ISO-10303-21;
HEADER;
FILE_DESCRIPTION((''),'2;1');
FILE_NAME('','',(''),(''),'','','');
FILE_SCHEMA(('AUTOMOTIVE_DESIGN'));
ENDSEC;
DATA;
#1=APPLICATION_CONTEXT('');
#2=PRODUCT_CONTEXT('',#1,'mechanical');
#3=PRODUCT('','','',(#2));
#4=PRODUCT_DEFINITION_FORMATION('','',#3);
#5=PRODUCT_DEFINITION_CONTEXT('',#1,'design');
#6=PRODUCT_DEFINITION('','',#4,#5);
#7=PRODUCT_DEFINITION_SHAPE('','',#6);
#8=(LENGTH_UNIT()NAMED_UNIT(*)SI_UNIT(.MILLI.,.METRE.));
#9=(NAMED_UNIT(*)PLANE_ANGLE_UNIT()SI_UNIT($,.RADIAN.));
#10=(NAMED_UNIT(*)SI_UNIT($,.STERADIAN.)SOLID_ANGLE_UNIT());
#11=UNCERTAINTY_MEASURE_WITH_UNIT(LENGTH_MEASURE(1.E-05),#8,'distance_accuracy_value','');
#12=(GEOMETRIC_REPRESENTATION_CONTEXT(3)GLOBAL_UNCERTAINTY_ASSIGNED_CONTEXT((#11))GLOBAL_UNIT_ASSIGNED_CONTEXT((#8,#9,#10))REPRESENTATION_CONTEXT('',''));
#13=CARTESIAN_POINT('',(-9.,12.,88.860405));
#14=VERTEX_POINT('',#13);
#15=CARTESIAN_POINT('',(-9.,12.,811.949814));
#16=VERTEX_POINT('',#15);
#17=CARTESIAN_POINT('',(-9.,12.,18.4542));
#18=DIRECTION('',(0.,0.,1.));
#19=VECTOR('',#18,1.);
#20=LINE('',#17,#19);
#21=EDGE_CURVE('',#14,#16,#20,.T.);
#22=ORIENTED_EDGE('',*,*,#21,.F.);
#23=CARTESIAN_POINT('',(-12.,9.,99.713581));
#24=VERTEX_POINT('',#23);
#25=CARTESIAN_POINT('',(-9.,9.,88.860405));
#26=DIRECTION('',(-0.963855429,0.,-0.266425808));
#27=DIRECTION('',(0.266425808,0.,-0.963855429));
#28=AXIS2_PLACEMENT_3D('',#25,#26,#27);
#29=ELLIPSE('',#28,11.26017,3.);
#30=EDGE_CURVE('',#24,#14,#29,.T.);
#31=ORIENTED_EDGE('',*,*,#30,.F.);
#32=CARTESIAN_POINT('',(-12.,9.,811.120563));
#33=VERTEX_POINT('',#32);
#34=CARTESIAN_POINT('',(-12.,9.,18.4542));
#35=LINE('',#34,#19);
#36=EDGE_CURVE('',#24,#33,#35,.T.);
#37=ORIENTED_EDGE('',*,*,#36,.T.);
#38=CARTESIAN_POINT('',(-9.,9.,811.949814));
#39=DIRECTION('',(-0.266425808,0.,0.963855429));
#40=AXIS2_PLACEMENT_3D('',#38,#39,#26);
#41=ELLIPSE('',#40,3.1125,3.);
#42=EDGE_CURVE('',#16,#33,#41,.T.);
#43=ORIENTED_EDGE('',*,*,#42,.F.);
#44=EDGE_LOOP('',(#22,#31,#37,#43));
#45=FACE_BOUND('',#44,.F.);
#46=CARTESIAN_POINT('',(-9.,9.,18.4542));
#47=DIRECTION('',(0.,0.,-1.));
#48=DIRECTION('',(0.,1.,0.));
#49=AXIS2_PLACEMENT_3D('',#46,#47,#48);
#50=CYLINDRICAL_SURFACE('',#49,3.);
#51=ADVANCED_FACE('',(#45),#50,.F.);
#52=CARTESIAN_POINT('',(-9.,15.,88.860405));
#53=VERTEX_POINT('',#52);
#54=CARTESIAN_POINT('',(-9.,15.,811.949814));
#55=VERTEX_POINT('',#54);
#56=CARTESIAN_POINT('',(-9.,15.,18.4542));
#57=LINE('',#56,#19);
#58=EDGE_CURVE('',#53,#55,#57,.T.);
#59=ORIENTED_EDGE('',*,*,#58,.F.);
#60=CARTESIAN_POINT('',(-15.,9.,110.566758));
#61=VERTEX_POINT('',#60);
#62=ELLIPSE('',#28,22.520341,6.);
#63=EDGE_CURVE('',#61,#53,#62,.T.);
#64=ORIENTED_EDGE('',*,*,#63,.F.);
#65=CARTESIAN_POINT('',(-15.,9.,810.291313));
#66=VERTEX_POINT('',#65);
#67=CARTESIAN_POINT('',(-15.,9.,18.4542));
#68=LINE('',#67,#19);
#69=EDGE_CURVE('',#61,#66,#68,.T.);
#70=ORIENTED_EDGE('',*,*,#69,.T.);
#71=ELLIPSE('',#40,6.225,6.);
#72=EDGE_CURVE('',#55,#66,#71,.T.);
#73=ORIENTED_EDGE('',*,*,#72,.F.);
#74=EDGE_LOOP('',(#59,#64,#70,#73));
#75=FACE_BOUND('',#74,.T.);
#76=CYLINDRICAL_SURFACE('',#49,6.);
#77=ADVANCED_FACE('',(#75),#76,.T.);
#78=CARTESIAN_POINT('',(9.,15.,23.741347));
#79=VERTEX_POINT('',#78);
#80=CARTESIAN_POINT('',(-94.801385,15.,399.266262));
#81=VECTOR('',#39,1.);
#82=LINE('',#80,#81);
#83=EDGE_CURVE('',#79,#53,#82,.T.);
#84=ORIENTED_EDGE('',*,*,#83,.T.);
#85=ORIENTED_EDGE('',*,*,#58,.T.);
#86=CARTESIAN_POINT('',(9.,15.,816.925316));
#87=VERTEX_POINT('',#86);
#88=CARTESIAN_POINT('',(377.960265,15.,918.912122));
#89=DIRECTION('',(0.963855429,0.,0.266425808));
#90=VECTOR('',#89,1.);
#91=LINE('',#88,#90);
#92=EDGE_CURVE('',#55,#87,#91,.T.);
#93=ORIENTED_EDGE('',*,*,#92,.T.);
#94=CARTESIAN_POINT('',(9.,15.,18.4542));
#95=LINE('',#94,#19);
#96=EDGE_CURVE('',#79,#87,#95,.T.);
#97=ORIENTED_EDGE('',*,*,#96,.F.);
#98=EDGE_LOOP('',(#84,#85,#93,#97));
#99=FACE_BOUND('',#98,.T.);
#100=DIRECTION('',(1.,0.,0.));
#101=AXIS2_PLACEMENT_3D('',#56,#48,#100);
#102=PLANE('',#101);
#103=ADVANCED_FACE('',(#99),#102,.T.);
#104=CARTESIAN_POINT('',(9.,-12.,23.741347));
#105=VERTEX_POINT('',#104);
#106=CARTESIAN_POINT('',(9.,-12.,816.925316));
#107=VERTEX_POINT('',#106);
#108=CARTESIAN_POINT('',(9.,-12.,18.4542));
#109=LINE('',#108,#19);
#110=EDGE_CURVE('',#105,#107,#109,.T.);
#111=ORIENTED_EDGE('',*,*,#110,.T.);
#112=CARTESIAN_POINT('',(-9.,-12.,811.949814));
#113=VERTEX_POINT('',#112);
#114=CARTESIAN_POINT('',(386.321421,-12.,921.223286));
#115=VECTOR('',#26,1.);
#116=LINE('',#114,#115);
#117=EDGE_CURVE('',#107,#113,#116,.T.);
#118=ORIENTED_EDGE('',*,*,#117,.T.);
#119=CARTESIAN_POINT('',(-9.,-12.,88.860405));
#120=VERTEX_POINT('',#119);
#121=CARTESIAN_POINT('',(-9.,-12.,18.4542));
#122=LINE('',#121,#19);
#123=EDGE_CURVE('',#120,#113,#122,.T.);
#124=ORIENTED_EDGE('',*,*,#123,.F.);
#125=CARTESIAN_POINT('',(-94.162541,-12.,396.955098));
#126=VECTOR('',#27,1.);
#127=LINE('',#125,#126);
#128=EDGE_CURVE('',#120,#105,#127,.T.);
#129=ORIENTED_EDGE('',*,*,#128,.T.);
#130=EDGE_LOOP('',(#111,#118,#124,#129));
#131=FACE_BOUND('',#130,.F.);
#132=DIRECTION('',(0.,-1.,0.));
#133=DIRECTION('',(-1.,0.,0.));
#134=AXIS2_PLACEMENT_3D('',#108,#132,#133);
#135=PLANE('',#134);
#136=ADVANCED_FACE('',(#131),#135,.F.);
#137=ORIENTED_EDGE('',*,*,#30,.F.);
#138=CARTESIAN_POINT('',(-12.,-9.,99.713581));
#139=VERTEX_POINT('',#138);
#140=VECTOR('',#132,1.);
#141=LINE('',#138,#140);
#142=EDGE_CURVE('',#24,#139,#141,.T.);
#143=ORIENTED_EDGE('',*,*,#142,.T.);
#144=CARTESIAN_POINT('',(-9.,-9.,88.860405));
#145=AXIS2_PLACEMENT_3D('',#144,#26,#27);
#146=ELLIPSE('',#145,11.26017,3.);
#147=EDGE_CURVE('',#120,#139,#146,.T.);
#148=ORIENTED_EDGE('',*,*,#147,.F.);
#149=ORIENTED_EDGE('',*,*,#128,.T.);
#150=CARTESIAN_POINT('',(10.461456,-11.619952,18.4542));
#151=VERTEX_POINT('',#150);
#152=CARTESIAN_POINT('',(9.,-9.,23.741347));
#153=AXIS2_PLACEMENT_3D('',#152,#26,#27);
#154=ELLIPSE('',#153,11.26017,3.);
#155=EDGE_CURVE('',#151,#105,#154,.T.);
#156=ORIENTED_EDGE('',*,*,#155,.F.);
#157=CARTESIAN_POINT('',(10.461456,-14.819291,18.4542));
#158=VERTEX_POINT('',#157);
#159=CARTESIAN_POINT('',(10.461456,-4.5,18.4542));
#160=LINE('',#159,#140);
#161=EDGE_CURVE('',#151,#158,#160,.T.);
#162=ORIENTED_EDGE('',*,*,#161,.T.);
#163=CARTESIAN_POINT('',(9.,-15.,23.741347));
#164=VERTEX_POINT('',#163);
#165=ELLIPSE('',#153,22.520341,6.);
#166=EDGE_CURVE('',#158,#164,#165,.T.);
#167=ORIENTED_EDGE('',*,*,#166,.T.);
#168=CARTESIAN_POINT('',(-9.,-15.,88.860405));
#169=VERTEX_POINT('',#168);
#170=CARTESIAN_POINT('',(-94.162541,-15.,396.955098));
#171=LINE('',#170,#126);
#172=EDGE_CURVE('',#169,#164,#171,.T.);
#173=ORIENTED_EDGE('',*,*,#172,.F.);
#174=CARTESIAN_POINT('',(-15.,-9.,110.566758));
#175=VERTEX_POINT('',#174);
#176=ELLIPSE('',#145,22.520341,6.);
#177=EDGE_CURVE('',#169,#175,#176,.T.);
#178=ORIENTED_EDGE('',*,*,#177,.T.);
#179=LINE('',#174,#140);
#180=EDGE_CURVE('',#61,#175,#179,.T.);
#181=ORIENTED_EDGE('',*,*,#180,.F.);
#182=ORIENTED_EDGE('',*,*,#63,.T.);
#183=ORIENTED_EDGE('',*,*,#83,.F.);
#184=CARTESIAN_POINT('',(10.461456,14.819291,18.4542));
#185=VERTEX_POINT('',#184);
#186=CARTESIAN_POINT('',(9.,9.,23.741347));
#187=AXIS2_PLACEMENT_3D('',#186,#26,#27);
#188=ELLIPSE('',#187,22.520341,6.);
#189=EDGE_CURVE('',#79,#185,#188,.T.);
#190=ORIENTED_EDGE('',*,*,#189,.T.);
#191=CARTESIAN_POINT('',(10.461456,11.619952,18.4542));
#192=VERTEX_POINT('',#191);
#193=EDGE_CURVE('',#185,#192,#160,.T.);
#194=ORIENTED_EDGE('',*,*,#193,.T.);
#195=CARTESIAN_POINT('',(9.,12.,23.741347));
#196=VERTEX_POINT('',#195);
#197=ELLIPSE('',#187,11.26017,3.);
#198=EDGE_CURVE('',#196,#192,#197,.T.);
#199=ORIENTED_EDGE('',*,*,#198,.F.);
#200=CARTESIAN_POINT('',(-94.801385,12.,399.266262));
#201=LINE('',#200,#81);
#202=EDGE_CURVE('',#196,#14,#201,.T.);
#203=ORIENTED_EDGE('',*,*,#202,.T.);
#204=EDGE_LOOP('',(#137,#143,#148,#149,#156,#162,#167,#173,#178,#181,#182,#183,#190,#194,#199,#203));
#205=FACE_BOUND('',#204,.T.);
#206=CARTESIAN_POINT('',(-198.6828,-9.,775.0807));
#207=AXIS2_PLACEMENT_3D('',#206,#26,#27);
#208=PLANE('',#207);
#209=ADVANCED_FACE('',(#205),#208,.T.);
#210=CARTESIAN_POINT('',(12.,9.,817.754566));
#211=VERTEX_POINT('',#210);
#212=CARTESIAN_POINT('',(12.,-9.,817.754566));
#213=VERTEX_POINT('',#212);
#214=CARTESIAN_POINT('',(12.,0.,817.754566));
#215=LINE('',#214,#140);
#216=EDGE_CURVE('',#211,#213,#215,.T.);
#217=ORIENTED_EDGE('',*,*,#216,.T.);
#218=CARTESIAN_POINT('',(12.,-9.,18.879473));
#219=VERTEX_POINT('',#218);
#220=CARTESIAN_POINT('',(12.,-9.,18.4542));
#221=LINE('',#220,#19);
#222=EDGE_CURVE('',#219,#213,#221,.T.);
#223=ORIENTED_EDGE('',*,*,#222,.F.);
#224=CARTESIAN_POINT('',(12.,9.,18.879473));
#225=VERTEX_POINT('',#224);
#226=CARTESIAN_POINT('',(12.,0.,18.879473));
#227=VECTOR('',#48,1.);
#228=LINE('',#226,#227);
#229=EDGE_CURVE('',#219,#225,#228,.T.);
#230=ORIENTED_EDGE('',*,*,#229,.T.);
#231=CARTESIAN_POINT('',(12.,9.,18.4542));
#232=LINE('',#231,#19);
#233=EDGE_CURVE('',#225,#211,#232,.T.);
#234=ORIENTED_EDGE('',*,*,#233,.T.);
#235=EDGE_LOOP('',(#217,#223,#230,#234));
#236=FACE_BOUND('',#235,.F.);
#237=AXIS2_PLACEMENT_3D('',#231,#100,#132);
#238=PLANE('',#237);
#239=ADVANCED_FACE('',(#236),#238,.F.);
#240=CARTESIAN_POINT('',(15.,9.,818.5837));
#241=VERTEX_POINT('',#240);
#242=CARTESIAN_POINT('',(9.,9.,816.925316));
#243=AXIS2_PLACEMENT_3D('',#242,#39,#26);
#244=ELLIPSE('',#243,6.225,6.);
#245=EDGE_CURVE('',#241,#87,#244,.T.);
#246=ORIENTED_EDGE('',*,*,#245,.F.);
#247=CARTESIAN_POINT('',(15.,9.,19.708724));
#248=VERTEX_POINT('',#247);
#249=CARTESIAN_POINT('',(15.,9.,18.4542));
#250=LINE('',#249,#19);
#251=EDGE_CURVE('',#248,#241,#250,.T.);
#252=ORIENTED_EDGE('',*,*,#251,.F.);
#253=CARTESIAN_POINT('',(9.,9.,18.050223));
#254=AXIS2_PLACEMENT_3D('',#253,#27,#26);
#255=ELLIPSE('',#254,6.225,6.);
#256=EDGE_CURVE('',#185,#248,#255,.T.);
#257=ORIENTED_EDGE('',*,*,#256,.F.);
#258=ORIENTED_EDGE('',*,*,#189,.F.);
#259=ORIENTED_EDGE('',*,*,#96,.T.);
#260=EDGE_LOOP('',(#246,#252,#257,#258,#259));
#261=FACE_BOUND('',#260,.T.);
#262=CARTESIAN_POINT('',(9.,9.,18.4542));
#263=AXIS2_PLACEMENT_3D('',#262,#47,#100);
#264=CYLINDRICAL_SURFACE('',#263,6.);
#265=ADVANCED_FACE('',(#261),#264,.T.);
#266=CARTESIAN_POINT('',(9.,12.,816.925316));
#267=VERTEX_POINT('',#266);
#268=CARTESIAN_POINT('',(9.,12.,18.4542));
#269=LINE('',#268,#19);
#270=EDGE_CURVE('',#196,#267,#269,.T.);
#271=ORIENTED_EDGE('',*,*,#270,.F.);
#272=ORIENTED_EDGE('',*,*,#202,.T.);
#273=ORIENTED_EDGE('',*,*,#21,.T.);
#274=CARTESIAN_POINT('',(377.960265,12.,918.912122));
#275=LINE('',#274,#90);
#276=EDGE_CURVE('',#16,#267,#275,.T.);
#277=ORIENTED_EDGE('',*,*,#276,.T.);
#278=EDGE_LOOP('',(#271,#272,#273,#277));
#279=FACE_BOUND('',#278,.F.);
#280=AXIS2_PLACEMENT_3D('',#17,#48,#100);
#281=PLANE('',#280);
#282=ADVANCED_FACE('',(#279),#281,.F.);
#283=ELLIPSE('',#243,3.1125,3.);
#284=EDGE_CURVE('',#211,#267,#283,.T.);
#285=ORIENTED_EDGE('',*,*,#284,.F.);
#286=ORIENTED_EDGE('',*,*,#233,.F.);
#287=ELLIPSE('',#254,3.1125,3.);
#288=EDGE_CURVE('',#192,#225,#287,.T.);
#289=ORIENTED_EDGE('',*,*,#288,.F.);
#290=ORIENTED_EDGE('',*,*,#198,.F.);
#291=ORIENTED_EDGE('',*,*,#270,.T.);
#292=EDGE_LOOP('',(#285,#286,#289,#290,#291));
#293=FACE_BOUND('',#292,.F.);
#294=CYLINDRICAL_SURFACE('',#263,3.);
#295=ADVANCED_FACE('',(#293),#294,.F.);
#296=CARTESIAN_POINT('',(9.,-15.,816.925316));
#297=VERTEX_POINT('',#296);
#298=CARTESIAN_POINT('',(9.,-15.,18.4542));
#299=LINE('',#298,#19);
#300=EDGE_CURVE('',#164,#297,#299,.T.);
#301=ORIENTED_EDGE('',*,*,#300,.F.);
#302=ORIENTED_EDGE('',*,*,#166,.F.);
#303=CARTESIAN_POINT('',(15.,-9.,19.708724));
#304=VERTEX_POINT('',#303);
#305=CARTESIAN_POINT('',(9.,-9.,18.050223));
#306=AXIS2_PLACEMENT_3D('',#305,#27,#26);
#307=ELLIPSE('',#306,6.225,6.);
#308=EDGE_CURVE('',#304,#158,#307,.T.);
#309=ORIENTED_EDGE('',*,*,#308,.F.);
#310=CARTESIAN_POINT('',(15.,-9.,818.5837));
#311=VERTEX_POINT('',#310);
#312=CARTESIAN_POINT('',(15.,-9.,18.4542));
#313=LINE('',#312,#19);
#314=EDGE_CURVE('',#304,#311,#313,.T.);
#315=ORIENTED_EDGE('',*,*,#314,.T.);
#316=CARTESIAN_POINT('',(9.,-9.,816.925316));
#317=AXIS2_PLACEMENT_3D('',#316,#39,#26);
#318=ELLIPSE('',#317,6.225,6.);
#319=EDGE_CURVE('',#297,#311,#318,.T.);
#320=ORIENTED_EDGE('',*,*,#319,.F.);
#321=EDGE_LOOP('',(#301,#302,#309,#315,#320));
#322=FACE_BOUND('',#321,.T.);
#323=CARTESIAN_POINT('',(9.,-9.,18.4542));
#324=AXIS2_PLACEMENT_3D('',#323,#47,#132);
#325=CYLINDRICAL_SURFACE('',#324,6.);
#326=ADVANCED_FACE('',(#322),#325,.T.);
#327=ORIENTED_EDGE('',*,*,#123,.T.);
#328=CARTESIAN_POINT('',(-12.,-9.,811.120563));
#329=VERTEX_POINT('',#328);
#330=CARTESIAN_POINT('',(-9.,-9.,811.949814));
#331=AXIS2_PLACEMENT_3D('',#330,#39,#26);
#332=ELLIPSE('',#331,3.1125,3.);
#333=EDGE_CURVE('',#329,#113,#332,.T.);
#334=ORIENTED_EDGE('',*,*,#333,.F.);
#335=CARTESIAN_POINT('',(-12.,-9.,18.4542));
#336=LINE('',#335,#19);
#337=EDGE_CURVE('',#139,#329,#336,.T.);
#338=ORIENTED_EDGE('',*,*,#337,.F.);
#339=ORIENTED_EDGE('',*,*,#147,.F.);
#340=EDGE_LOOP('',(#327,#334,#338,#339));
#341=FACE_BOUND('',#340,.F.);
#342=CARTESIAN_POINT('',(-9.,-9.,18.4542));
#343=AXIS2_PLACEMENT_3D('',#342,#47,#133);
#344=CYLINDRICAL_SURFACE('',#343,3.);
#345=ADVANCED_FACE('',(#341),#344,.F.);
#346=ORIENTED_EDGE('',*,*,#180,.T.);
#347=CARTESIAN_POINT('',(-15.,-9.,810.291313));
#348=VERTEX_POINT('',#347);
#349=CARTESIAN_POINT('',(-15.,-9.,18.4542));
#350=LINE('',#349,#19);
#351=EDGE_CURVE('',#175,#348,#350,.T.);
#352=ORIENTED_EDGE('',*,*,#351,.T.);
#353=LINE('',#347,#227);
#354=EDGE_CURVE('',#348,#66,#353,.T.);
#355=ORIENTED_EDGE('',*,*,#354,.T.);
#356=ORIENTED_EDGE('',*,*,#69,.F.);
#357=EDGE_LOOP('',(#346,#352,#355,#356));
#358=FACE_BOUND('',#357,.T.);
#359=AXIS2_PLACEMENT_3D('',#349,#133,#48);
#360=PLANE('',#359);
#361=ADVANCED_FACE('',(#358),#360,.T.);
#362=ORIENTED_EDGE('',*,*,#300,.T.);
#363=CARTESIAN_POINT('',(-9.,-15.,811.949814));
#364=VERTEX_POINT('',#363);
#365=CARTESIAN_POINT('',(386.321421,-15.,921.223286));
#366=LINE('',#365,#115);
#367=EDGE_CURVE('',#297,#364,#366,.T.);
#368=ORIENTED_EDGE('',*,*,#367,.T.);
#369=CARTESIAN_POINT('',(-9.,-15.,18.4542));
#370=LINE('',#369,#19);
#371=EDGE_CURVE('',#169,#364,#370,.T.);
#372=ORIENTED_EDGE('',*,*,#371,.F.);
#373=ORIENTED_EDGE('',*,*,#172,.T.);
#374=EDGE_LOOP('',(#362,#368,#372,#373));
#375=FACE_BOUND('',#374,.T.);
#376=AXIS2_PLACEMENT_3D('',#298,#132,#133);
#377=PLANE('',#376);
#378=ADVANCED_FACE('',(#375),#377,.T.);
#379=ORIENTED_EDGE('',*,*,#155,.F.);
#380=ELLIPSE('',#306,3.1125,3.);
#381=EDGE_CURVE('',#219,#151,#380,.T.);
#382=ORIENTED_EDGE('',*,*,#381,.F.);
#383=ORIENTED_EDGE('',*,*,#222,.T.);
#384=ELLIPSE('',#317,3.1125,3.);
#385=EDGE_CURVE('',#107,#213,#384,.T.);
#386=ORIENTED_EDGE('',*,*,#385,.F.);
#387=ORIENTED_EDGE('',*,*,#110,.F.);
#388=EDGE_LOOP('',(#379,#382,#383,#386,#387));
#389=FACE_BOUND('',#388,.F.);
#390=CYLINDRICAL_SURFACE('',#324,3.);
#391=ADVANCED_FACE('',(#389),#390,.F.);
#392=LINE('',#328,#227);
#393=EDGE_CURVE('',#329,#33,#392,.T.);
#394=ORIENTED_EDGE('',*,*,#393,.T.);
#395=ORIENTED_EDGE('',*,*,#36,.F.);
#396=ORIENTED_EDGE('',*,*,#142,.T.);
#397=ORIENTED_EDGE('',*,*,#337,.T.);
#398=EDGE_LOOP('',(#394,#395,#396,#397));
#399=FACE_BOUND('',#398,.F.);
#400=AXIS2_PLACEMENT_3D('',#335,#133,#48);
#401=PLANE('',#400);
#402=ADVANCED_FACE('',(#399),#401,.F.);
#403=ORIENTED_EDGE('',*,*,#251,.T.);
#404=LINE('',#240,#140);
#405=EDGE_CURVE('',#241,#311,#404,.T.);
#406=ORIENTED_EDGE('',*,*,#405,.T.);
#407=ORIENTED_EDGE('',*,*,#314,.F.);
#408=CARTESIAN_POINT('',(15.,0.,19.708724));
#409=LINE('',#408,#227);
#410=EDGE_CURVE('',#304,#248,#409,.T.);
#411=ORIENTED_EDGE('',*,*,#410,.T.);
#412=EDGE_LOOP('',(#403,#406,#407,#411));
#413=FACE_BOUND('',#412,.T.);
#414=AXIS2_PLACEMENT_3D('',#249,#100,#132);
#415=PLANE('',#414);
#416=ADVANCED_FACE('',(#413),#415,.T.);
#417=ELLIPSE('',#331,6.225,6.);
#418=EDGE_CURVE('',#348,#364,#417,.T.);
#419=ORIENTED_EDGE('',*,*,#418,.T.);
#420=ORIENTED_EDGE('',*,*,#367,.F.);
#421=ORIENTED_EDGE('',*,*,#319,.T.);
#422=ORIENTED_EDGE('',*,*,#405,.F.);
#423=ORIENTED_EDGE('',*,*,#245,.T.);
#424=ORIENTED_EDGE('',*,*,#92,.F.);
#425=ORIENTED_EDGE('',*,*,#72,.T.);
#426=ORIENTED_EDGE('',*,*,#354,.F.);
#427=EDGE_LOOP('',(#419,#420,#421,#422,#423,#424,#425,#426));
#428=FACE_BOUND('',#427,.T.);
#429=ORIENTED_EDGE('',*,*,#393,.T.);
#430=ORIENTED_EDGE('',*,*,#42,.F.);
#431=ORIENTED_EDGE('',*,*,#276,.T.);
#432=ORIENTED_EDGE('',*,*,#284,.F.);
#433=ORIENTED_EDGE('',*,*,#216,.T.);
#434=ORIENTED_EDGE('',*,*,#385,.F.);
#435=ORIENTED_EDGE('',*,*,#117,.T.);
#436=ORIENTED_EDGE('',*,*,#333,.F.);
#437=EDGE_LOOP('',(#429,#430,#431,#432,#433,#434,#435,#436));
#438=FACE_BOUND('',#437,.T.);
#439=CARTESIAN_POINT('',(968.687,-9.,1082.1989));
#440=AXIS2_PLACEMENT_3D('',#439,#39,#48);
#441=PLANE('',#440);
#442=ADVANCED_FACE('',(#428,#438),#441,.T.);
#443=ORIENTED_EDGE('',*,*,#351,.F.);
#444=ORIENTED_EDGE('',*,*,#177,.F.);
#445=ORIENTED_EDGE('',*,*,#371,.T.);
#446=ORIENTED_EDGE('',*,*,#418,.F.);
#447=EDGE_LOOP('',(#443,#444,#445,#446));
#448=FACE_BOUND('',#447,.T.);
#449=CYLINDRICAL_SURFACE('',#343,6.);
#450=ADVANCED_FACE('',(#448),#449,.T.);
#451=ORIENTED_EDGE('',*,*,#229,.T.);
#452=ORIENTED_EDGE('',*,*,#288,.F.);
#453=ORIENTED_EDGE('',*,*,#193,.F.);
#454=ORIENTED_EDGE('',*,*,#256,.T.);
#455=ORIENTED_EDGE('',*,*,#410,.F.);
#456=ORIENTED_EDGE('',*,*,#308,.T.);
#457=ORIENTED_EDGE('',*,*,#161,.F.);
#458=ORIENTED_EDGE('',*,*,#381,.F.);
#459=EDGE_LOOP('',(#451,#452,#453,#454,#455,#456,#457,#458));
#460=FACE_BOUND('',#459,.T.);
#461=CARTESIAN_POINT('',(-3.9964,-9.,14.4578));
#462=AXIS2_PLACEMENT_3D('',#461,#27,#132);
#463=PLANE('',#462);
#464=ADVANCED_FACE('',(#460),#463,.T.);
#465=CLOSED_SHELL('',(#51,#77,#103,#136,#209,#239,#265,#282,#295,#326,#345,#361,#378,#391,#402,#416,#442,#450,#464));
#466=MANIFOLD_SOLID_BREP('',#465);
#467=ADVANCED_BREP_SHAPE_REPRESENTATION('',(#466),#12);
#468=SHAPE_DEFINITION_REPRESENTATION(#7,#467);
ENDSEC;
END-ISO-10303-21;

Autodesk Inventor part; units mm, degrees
ref_plane "Start Plane" through (0, 0, 18.4542) normal (0, 0, 1) x (1, 0, 0)
ref_plane "End Plane" through (0, 0, 818.5838) normal (0, 0, 1) x (1, 0, 0)
sketch "Sketch" plane through (0, 0, 0) normal (0, 0, 1) x (1, 0, 0)
  line L0 (-15, -9) -> (-15, 9)
  line L1 (-9, 15) -> (9, 15)
  line L2 (15, 9) -> (15, -9)
  line L3 (9, -15) -> (-9, -15)
  arc A0 (-15, -9) -> (-9, -15) centre (-9, -9) ccw
  arc A1 (-9, 15) -> (-15, 9) centre (-9, 9) ccw
  arc A2 (15, 9) -> (9, 15) centre (9, 9) ccw
  arc A3 (9, -15) -> (15, -9) centre (9, -9) ccw
  arc A4 (-9, 12) -> (-12, 9) centre (-9, 9) ccw
  line L4 (-9, 12) -> (9, 12)
  arc A5 (12, 9) -> (9, 12) centre (9, 9) ccw
  line L5 (12, 9) -> (12, -9)
  arc A6 (9, -12) -> (12, -9) centre (9, -9) ccw
  line L6 (9, -12) -> (-9, -12)
  arc A7 (-12, -9) -> (-9, -12) centre (-9, -9) ccw
  line L7 (-12, -9) -> (-12, 9)
  line L8 (0, 22.7397) -> (0, -22.7397) construction
  line L9 (-22.7397, 0) -> (22.7397, 0) construction
  dimension "d7" = 6
  dimension "d10" = 30
  dimension "d11" = 30
  dimension "d12" = 3
  dimension "d15" = 15
  dimension "d16" = 15
extrude "Body" add sketch "Sketch" along normal up to surface (800.1295 mm away) from surface at 18.4542
sketch "Sketch3" plane through (0, 0, 0) normal (0, 0, 1) x (1, 0, 0)
  line L0 (0, 0) -> (10, 0)
ref_plane "Work Plane3" through (0, 0, 0) normal (0, -1, 0) x (1, 0, 0)
ref_plane "Work Plane4" through (968.687, -9, 1082.1989) normal (-0.2664258, 0, 0.9638554) x (0.9638554, 0, 0.2664258)
split "Split1" plane through (968.687, -9, 1082.1989) removes the side toward (-0.2664258, 0, 0.9638554)
ref_plane "Work Plane5" through (-198.6828, -9, 775.0807) normal (-0.9638554, 0, -0.2664258) x (-0.2664258, 0, 0.9638554)
split "Split2" plane through (-198.6828, -9, 775.0807) removes the side toward (-0.9638554, 0, -0.2664258)
ref_plane "Work Plane6" through (-3.9964, -9, 14.4578) normal (0.2664258, 0, -0.9638554) x (-0.9638554, 0, -0.2664258)
split "Split3" plane through (-3.9964, -9, 14.4578) removes the side toward (0.2664258, 0, -0.9638554)
sketch "Sketch4" plane through (0, 0, 0) normal (0, -1, 0) x (1, 0, 0)
  line L0 (-2, 18.4542) -> (12, 18.4542) projected
  line L1 (-2, 818.5838) -> (12, 818.5838) projected
  dimension "d18" = 800.1295
equation "\"d7\" = G_IR"
equation "\"d10\" = G_H"
equation "\"d11\" = G_W"
equation "\"d12\" = G_T"
equation "\"d15\" = 0.5 * d10"
equation "\"d16\" = 0.5 * d11"
equation "\"d3\" = G_L"
equation "\"G_W\" = 30"
equation "\"G_H\" = 30"
equation "\"G_T\" = 3"
equation "\"G_IR\" = 6"
equation "\"G_L\" = d18"
equation "\"G_OFFSET_START\" = -18.45422"
equation "\"G_OFFSET_END\" = -11.41625"
equation "\"d13\" = -G_OFFSET_START"
equation "\"d14\" = G_OFFSET_END + B_L"
equation "\"B_L\" = 830"
properties part number "DIN EN 10219-2 - 30 x 30 x 3  - 800.13" material "Steel, Mild"
